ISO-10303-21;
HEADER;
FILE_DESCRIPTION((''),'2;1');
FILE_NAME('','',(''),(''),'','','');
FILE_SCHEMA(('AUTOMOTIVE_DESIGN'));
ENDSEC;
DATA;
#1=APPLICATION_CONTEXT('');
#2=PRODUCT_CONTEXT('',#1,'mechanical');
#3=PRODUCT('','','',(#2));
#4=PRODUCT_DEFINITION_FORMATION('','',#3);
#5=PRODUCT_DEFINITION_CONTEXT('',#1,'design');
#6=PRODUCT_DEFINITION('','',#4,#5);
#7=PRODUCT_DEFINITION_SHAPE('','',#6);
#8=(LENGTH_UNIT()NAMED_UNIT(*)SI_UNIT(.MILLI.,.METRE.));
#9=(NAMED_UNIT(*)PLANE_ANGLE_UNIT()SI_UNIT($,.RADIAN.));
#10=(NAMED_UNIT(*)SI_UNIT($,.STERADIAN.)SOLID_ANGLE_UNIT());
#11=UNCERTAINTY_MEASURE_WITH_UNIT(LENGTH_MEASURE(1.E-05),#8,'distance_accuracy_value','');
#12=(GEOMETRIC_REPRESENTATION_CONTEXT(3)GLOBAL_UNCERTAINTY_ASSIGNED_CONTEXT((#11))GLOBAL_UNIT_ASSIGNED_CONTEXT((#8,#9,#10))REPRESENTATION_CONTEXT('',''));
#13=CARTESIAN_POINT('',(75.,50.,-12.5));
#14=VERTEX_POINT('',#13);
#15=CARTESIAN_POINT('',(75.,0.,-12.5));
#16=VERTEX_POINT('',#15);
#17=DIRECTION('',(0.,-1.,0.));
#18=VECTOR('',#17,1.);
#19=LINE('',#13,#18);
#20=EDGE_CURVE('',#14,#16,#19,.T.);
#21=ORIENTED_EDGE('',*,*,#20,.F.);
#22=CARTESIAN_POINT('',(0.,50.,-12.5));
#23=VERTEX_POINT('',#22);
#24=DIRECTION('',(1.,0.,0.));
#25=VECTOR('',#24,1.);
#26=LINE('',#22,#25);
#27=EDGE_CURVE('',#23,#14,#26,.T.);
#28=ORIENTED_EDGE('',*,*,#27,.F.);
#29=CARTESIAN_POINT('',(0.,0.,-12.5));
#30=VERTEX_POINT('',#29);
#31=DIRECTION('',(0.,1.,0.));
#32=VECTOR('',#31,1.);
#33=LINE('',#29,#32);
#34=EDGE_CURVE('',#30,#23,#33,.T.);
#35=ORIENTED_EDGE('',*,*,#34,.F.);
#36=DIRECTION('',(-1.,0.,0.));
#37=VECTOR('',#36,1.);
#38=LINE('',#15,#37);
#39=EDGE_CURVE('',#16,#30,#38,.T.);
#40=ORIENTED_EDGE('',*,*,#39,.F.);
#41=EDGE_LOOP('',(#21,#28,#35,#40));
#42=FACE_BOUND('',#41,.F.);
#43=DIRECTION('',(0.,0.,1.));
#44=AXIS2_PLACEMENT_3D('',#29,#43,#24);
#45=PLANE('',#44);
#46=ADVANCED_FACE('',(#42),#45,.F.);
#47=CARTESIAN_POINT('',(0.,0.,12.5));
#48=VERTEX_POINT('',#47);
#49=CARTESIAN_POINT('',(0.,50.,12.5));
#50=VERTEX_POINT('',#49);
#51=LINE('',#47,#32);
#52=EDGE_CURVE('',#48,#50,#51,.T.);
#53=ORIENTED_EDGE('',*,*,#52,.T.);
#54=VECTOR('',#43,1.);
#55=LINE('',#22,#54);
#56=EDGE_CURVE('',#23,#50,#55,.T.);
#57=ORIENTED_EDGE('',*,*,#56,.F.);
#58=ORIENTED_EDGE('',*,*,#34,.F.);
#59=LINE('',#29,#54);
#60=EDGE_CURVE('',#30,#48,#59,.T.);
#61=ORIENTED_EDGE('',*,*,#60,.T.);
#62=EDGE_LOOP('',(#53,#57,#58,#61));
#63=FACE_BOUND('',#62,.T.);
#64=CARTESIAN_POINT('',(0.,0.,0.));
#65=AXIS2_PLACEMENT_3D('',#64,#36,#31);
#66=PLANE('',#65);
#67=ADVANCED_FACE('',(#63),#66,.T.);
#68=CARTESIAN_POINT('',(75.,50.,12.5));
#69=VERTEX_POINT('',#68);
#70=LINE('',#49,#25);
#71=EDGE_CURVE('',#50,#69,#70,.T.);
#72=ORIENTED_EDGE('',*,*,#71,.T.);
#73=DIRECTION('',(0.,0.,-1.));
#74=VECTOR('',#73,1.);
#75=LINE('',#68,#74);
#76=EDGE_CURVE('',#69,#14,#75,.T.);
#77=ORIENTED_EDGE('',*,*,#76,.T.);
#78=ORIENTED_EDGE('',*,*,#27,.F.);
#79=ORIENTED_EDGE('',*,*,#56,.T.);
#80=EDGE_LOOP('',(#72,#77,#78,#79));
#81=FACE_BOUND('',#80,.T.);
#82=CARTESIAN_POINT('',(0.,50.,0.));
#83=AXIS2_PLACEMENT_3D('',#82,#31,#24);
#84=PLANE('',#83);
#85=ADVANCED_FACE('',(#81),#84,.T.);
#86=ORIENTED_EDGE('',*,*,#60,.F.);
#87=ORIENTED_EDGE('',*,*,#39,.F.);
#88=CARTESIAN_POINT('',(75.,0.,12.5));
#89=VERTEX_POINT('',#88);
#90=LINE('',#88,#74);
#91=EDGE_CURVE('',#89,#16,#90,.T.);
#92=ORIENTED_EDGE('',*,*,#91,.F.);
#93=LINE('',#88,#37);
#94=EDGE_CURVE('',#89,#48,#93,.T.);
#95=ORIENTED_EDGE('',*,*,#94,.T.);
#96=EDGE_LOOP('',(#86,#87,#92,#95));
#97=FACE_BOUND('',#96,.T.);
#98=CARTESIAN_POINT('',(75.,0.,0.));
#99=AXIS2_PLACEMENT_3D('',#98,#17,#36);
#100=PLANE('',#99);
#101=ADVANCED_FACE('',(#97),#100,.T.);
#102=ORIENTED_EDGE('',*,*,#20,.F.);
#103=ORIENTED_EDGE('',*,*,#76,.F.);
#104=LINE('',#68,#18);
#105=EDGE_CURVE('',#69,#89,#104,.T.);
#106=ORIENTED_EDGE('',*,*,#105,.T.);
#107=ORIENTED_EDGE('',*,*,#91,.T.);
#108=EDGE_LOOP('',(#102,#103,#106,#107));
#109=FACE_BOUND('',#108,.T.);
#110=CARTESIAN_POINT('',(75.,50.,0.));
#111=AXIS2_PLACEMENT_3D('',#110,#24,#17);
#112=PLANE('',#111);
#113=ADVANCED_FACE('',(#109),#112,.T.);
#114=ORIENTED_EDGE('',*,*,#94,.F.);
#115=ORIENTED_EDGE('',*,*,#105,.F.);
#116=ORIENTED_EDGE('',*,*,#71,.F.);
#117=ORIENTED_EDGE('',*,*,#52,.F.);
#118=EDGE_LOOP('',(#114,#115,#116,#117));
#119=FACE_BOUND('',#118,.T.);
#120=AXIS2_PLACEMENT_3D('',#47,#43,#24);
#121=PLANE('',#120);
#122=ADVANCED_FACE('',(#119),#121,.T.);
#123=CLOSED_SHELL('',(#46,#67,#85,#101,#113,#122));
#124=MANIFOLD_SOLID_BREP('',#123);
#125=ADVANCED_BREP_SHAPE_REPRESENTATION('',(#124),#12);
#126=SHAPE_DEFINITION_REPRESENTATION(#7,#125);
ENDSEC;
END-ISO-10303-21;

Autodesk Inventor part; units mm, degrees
ref_plane "YZ Plane" through (0, 0, 0) normal (1, 0, 0) x (0, 1, 0)
ref_plane "XZ Plane" through (0, 0, 0) normal (0, 1, 0) x (-1, 0, 0)
ref_plane "XY Plane" through (0, 0, 0) normal (0, 0, 1) x (1, 0, 0)
sketch "Sketch1" plane through (0, 0, 0) normal (0, 0, 1) x (1, 0, 0)
  line L0 (0, 50) -> (75, 50)
  line L1 (75, 50) -> (75, 0)
  line L2 (75, 0) -> (0, 0)
  line L3 (0, 0) -> (0, 50)
extrude "Extrusion1" add sketch "Sketch1" along normal mid plane 25
properties part number "Block, Corner Constrained (mm)" material "Steel, MS"
